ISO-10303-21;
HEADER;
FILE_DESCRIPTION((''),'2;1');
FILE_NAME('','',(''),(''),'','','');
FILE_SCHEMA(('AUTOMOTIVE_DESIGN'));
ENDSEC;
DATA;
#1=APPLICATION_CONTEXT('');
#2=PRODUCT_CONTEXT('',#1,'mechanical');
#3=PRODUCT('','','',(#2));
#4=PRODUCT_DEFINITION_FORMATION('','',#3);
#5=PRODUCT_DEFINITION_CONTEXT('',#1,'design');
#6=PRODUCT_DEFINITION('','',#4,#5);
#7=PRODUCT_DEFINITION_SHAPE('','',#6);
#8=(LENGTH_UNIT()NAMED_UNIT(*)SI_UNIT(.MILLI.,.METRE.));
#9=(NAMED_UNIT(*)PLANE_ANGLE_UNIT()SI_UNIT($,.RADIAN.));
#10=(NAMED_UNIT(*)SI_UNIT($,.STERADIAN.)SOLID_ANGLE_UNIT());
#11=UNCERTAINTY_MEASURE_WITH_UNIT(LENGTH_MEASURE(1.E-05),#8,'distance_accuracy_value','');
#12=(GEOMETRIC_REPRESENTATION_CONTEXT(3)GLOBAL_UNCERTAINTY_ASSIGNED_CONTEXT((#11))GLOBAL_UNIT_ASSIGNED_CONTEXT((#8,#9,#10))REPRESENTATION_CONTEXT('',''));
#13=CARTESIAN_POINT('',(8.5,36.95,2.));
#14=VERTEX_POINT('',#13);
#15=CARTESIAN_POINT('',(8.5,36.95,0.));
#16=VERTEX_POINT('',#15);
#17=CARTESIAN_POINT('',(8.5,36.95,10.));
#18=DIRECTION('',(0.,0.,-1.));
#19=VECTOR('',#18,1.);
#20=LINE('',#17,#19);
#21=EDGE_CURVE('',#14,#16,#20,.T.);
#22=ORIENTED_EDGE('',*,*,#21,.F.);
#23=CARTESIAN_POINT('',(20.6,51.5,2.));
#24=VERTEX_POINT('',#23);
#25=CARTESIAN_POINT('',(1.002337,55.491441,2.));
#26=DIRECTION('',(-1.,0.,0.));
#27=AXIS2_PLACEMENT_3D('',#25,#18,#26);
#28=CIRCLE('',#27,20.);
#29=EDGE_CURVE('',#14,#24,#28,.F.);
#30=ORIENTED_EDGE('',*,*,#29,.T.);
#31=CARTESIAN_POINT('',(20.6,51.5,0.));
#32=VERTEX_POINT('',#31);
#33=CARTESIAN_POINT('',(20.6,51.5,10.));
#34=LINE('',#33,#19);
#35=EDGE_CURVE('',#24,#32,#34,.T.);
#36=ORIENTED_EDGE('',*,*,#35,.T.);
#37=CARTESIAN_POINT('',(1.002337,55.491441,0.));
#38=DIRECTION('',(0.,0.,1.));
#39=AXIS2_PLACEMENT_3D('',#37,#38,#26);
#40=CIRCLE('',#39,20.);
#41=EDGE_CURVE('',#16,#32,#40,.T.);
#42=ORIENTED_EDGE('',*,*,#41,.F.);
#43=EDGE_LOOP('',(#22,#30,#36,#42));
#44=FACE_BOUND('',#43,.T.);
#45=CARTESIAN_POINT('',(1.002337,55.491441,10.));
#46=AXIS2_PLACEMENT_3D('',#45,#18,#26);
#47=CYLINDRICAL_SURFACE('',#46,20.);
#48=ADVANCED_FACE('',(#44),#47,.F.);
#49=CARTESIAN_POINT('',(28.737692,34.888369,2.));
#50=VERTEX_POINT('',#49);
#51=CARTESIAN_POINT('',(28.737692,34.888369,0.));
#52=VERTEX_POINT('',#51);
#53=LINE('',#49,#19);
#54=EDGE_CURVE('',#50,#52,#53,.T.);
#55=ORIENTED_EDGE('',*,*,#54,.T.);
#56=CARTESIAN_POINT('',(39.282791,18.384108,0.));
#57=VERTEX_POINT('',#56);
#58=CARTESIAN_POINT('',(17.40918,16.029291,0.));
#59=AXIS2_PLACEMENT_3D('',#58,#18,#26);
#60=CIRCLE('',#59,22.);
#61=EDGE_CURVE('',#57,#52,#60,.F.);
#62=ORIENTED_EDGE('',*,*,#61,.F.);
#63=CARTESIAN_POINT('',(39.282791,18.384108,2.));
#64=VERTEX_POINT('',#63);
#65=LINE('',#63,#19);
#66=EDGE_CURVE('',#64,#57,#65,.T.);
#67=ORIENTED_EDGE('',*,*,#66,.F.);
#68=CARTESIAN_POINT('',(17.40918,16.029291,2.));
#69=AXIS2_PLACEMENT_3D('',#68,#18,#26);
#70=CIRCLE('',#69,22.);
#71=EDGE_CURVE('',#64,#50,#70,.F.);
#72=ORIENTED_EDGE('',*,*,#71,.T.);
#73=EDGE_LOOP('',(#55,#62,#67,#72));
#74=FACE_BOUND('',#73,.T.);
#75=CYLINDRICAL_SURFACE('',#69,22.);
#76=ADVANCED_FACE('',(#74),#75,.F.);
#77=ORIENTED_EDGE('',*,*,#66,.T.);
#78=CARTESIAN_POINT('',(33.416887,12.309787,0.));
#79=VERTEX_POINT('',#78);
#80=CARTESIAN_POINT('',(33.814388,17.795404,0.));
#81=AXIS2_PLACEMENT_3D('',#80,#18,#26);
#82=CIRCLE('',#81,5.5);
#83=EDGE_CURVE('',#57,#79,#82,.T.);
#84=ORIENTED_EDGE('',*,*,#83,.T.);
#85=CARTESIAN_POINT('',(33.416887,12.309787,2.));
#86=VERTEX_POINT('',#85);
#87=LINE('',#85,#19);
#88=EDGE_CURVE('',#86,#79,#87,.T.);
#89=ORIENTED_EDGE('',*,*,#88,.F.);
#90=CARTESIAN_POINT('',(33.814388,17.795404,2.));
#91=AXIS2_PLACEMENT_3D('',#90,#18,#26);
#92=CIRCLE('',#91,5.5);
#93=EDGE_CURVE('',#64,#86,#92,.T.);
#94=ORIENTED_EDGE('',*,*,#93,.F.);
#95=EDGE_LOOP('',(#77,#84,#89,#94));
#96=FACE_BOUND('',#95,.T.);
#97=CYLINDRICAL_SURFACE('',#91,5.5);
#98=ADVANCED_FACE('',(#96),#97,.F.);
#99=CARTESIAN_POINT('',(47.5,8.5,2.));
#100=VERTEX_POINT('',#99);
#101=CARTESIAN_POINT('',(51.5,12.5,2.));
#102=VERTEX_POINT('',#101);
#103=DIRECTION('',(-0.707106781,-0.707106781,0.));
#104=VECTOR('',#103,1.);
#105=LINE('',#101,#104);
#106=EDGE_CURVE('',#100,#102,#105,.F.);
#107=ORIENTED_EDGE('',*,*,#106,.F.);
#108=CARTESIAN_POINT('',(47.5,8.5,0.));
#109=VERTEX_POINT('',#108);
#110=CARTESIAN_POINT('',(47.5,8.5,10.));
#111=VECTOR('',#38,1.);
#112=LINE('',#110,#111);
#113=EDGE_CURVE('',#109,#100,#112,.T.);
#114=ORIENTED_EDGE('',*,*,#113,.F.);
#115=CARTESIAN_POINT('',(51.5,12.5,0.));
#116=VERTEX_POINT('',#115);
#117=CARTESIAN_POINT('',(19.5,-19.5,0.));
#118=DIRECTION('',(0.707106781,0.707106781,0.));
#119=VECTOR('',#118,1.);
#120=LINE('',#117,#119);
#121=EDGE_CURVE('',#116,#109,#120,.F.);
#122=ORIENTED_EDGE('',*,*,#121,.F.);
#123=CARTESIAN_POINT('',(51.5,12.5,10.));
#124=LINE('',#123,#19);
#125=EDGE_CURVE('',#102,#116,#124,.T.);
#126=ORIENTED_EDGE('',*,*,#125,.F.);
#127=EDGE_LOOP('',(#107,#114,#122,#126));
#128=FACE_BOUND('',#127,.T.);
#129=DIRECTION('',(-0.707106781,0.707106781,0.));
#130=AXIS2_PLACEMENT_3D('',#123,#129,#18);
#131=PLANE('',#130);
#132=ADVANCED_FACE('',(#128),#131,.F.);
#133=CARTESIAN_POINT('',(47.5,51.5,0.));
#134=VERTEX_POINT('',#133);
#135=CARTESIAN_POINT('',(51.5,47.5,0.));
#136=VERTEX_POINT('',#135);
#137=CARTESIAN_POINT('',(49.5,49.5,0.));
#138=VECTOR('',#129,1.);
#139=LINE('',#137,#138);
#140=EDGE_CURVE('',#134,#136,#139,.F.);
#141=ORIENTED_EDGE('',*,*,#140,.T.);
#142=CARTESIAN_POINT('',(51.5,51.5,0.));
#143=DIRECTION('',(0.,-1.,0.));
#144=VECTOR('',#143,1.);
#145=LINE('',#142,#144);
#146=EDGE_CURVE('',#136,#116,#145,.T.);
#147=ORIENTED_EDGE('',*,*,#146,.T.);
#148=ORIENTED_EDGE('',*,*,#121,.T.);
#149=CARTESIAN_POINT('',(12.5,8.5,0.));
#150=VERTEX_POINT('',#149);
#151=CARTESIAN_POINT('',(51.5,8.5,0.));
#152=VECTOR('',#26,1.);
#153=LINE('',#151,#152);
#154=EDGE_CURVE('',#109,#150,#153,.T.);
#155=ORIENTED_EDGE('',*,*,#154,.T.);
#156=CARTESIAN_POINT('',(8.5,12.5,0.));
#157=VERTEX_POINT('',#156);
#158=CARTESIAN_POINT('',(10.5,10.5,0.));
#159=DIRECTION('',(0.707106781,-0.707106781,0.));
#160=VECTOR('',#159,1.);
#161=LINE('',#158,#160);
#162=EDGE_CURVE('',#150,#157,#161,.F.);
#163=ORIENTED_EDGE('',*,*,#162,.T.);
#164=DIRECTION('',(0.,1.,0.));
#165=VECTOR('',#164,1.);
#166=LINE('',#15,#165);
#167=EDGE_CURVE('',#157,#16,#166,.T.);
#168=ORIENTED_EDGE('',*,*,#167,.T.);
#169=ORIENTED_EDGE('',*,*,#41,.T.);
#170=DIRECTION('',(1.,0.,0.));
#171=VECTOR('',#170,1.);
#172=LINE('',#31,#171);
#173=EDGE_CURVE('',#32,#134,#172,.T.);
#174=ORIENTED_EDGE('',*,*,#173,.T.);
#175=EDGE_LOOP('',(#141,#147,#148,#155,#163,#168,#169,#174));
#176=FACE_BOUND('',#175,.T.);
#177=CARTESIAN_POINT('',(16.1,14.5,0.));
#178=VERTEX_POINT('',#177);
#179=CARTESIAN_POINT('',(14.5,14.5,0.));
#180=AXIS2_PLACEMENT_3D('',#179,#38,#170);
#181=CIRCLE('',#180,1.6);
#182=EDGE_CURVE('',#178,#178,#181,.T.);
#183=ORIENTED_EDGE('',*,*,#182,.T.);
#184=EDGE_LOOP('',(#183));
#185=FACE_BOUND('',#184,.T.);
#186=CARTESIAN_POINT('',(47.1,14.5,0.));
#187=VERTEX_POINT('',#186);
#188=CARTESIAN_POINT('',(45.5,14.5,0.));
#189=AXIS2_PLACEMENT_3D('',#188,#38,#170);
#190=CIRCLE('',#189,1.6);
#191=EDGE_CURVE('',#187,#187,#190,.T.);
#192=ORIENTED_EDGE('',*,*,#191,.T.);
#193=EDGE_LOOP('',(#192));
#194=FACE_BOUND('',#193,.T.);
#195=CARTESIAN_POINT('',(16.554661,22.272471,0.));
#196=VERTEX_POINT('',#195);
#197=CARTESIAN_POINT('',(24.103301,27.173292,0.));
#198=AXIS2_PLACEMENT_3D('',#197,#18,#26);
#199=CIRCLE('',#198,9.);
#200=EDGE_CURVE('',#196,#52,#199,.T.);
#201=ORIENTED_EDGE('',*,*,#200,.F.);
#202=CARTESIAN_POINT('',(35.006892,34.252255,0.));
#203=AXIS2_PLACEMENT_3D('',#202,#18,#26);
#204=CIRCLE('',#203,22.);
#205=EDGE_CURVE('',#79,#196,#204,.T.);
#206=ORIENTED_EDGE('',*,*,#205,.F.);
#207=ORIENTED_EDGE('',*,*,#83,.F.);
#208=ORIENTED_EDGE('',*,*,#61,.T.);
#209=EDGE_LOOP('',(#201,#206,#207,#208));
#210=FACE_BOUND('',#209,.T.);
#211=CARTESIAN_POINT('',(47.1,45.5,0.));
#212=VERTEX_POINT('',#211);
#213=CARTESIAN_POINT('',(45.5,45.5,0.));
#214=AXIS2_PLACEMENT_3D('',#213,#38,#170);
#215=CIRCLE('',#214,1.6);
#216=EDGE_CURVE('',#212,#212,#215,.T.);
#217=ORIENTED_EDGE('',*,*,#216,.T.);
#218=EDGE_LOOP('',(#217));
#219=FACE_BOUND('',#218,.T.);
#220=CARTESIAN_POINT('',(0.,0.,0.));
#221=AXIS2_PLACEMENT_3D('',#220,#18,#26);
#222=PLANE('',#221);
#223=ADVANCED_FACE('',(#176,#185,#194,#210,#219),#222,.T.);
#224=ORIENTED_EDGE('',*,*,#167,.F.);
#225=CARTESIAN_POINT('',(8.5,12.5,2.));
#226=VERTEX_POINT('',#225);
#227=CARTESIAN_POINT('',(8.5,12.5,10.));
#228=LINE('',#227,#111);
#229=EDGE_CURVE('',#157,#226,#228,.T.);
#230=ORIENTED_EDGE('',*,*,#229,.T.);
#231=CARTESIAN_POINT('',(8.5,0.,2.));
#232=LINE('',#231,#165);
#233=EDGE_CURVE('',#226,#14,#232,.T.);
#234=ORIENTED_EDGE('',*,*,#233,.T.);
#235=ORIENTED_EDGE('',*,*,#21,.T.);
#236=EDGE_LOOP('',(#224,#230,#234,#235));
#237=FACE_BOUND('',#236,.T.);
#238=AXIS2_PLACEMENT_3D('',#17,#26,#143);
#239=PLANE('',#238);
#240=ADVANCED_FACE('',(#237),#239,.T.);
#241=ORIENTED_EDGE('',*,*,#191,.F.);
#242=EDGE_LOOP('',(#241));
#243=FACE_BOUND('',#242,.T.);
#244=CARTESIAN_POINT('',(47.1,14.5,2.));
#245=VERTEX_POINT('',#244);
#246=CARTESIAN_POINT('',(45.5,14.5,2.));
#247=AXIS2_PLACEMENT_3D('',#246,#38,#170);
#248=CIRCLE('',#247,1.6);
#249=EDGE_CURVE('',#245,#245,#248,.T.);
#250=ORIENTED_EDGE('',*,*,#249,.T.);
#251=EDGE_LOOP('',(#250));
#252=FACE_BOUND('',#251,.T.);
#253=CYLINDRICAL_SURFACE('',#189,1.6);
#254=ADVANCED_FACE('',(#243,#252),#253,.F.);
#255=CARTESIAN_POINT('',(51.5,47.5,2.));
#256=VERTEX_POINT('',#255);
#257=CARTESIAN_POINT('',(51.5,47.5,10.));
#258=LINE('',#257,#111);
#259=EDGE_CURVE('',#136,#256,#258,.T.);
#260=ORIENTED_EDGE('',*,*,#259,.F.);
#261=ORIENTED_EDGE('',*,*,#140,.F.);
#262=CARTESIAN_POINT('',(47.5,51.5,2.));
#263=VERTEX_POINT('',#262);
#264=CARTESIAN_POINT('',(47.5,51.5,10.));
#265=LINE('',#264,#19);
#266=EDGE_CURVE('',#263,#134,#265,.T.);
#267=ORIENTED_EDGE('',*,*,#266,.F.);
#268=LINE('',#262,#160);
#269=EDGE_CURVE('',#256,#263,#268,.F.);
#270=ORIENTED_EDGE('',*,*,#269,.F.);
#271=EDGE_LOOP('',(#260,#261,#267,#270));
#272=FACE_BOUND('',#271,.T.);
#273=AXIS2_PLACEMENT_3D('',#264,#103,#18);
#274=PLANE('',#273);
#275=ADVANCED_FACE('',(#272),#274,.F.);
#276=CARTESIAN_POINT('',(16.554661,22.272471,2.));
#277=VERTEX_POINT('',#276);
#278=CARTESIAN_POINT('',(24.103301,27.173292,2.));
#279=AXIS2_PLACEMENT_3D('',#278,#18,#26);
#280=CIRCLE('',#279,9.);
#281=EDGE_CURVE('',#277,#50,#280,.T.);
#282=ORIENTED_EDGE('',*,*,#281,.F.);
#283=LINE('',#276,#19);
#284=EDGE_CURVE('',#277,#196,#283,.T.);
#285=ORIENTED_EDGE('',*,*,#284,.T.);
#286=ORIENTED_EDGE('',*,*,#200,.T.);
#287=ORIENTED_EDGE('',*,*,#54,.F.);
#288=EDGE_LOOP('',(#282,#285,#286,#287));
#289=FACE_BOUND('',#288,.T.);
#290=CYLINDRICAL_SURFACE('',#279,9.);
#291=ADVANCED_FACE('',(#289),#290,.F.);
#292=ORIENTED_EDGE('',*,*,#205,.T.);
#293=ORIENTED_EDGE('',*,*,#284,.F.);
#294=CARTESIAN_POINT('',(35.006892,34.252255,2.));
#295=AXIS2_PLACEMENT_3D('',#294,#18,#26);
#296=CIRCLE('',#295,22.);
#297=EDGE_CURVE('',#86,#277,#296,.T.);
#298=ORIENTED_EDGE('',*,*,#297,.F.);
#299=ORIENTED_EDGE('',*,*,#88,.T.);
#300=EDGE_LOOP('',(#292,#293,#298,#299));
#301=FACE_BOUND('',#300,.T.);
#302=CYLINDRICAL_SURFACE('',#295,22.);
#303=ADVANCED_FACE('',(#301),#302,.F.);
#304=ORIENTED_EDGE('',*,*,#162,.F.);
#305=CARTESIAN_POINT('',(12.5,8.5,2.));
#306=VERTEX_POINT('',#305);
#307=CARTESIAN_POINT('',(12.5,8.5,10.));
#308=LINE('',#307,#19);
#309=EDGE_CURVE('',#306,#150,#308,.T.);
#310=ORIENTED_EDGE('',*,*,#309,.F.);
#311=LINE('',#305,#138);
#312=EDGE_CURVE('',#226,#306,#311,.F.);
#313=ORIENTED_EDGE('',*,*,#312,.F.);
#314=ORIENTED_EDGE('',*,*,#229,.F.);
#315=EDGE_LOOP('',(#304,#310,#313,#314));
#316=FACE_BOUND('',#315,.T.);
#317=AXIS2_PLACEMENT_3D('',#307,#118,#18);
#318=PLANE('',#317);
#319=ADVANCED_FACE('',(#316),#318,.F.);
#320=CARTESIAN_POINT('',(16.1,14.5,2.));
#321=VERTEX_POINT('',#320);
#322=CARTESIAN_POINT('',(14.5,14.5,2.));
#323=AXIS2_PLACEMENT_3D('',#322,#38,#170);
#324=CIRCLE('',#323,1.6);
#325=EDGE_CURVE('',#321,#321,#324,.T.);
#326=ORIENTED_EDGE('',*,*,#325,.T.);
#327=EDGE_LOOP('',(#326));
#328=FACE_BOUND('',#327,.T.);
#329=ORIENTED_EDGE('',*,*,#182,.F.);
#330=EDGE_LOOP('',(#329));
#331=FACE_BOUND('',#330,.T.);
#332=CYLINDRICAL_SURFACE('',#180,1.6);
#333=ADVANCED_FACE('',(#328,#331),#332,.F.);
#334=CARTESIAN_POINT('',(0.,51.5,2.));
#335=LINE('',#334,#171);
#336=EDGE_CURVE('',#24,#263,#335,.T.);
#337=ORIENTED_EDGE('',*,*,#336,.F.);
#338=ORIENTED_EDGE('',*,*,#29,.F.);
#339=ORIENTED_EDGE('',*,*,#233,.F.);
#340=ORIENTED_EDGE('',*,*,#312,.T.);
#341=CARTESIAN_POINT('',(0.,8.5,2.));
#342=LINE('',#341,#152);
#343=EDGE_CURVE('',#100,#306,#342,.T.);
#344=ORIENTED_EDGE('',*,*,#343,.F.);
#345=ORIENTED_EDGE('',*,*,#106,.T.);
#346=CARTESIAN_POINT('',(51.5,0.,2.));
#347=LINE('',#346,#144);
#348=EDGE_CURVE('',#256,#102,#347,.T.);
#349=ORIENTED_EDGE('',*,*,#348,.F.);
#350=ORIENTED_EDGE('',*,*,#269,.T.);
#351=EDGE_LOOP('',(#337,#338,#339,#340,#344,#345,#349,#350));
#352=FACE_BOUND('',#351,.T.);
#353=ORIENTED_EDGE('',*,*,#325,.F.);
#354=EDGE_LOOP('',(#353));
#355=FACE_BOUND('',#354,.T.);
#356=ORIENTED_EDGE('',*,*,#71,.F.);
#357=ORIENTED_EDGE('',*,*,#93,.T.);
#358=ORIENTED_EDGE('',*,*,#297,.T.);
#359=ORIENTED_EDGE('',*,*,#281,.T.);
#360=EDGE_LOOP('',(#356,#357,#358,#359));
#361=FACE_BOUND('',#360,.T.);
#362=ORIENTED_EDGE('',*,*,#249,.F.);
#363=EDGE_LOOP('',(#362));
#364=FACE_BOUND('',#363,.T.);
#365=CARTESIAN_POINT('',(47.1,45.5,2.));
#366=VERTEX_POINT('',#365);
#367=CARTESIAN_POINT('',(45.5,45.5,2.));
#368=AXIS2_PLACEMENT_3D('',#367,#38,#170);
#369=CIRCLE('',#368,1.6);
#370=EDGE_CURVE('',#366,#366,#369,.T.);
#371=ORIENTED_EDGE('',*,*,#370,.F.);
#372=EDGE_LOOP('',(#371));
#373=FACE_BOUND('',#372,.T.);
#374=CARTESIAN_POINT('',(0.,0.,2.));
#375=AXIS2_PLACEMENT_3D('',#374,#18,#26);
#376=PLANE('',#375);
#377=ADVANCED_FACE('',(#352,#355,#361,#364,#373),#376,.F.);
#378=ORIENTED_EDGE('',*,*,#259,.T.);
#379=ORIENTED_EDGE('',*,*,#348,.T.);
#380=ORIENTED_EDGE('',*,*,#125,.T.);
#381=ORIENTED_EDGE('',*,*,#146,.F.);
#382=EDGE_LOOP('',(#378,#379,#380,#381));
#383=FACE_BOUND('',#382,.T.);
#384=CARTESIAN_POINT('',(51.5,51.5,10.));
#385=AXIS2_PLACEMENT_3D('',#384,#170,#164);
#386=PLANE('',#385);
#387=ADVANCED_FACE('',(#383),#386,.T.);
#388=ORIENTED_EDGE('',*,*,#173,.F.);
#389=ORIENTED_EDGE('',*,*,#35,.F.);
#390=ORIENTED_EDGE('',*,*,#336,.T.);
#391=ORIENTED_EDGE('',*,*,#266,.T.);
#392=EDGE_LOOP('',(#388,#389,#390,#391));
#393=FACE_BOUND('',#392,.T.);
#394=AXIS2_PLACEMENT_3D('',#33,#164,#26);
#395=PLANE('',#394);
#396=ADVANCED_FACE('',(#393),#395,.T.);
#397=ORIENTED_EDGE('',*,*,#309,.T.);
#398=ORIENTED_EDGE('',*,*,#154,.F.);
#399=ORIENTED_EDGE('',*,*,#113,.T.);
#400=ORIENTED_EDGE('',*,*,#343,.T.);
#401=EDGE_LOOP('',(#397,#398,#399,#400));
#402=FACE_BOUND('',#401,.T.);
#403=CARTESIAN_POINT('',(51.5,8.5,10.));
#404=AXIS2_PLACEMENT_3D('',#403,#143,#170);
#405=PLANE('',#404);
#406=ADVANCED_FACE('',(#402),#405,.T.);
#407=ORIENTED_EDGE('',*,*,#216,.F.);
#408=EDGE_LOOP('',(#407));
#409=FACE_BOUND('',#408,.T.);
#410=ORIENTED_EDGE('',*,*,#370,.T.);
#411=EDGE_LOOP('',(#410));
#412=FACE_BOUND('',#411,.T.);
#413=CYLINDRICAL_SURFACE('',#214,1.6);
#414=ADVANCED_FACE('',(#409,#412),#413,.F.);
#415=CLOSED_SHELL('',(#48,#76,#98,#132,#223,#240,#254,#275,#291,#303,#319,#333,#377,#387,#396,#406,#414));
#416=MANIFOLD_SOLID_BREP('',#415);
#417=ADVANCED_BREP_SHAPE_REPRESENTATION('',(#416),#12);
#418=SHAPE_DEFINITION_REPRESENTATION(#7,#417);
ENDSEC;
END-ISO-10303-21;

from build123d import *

# Parameters (mm, degrees)
CROQUIS1_W              = 60
CROQUIS1_H              = 60
SALIENTE_EXTRUIR1_DEPTH = 2
CROQUIS7_R              = 1.6
CORTAR_EXTRUIR1_DEPTH   = 85.876380696
CROQUIS8_OUTSIDE_W      = 78.976
CROQUIS8_OUTSIDE_H      = 78.976
CORTAR_EXTRUIR2_DEPTH   = 10
CORTAR_EXTRUIR4_DEPTH   = 73.859453745
CHAFL_N1_SIZE           = 4


with BuildPart() as part:
    # Croquis1 → Saliente-Extruir1 (new body)
    with BuildSketch(Plane.XY):
        with Locations((30, 30)):
            Rectangle(CROQUIS1_W, CROQUIS1_H)
    extrude(amount=SALIENTE_EXTRUIR1_DEPTH)

    # Croquis7 → Cortar-Extruir1 (cut, through all)
    with BuildSketch(Plane.XY.offset(2)):
        with Locations((14.5, 45.5)):
            Circle(CROQUIS7_R)
        with Locations((45.5, 45.5)):
            Circle(CROQUIS7_R)
        with Locations((14.5, 14.5)):
            Circle(CROQUIS7_R)
        with Locations((45.5, 14.5)):
            Circle(CROQUIS7_R)
    extrude(amount=-CORTAR_EXTRUIR1_DEPTH, mode=Mode.SUBTRACT)

    # Croquis8 outside → Cortar-Extruir2 (cut)
    with BuildSketch(Plane(origin=(0, 0, 0), x_dir=(-1, 0, 0), z_dir=(0, 0, -1))):
        with Locations((-30, 30)):
            Rectangle(CROQUIS8_OUTSIDE_W, CROQUIS8_OUTSIDE_H)
        with BuildLine():
            Line((-51.5, 51.5), (-51.5, 8.5))
            Line((-51.5, 8.5), (-8.5, 8.5))
            Line((-8.5, 8.5), (-8.5, 36.95))
            ThreePointArc((-8.5, 36.95), (-16.379748932, 42.703353122), (-20.6, 51.5))
            Line((-20.6, 51.5), (-51.5, 51.5))
        make_face(mode=Mode.SUBTRACT)
    extrude(amount=-CORTAR_EXTRUIR2_DEPTH, mode=Mode.SUBTRACT)

    # Croquis10 → Cortar-Extruir4 (cut, through all)
    with BuildSketch(Plane(origin=(0, 0, 0), x_dir=(-1, 0, 0), z_dir=(0, 0, -1))):
        with BuildLine():
            ThreePointArc((-39.282790937, 18.384108052), (-37.770757205, 13.974782814), (-33.416887225, 12.30978694))
            ThreePointArc((-33.416887225, 12.30978694), (-23.815977303, 15.311202908), (-16.554661394, 22.2724715))
            ThreePointArc((-16.554661394, 22.2724715), (-17.629242795, 33.425217186), (-28.737692181, 34.888369193))
            ThreePointArc((-28.737692181, 34.888369193), (-35.948136426, 27.874421452), (-39.282790937, 18.384108052))
        make_face()
    extrude(amount=-CORTAR_EXTRUIR4_DEPTH, mode=Mode.SUBTRACT)

    # Chaflán1
    chafl_n1_edges = [part.edges().sort_by_distance(p)[0] for p in [
        (8.5, 8.5, 1),
        (51.5, 8.5, 1),
        (51.5, 51.5, 1),
    ]]
    chamfer(chafl_n1_edges, length=CHAFL_N1_SIZE)


solid = part.part
